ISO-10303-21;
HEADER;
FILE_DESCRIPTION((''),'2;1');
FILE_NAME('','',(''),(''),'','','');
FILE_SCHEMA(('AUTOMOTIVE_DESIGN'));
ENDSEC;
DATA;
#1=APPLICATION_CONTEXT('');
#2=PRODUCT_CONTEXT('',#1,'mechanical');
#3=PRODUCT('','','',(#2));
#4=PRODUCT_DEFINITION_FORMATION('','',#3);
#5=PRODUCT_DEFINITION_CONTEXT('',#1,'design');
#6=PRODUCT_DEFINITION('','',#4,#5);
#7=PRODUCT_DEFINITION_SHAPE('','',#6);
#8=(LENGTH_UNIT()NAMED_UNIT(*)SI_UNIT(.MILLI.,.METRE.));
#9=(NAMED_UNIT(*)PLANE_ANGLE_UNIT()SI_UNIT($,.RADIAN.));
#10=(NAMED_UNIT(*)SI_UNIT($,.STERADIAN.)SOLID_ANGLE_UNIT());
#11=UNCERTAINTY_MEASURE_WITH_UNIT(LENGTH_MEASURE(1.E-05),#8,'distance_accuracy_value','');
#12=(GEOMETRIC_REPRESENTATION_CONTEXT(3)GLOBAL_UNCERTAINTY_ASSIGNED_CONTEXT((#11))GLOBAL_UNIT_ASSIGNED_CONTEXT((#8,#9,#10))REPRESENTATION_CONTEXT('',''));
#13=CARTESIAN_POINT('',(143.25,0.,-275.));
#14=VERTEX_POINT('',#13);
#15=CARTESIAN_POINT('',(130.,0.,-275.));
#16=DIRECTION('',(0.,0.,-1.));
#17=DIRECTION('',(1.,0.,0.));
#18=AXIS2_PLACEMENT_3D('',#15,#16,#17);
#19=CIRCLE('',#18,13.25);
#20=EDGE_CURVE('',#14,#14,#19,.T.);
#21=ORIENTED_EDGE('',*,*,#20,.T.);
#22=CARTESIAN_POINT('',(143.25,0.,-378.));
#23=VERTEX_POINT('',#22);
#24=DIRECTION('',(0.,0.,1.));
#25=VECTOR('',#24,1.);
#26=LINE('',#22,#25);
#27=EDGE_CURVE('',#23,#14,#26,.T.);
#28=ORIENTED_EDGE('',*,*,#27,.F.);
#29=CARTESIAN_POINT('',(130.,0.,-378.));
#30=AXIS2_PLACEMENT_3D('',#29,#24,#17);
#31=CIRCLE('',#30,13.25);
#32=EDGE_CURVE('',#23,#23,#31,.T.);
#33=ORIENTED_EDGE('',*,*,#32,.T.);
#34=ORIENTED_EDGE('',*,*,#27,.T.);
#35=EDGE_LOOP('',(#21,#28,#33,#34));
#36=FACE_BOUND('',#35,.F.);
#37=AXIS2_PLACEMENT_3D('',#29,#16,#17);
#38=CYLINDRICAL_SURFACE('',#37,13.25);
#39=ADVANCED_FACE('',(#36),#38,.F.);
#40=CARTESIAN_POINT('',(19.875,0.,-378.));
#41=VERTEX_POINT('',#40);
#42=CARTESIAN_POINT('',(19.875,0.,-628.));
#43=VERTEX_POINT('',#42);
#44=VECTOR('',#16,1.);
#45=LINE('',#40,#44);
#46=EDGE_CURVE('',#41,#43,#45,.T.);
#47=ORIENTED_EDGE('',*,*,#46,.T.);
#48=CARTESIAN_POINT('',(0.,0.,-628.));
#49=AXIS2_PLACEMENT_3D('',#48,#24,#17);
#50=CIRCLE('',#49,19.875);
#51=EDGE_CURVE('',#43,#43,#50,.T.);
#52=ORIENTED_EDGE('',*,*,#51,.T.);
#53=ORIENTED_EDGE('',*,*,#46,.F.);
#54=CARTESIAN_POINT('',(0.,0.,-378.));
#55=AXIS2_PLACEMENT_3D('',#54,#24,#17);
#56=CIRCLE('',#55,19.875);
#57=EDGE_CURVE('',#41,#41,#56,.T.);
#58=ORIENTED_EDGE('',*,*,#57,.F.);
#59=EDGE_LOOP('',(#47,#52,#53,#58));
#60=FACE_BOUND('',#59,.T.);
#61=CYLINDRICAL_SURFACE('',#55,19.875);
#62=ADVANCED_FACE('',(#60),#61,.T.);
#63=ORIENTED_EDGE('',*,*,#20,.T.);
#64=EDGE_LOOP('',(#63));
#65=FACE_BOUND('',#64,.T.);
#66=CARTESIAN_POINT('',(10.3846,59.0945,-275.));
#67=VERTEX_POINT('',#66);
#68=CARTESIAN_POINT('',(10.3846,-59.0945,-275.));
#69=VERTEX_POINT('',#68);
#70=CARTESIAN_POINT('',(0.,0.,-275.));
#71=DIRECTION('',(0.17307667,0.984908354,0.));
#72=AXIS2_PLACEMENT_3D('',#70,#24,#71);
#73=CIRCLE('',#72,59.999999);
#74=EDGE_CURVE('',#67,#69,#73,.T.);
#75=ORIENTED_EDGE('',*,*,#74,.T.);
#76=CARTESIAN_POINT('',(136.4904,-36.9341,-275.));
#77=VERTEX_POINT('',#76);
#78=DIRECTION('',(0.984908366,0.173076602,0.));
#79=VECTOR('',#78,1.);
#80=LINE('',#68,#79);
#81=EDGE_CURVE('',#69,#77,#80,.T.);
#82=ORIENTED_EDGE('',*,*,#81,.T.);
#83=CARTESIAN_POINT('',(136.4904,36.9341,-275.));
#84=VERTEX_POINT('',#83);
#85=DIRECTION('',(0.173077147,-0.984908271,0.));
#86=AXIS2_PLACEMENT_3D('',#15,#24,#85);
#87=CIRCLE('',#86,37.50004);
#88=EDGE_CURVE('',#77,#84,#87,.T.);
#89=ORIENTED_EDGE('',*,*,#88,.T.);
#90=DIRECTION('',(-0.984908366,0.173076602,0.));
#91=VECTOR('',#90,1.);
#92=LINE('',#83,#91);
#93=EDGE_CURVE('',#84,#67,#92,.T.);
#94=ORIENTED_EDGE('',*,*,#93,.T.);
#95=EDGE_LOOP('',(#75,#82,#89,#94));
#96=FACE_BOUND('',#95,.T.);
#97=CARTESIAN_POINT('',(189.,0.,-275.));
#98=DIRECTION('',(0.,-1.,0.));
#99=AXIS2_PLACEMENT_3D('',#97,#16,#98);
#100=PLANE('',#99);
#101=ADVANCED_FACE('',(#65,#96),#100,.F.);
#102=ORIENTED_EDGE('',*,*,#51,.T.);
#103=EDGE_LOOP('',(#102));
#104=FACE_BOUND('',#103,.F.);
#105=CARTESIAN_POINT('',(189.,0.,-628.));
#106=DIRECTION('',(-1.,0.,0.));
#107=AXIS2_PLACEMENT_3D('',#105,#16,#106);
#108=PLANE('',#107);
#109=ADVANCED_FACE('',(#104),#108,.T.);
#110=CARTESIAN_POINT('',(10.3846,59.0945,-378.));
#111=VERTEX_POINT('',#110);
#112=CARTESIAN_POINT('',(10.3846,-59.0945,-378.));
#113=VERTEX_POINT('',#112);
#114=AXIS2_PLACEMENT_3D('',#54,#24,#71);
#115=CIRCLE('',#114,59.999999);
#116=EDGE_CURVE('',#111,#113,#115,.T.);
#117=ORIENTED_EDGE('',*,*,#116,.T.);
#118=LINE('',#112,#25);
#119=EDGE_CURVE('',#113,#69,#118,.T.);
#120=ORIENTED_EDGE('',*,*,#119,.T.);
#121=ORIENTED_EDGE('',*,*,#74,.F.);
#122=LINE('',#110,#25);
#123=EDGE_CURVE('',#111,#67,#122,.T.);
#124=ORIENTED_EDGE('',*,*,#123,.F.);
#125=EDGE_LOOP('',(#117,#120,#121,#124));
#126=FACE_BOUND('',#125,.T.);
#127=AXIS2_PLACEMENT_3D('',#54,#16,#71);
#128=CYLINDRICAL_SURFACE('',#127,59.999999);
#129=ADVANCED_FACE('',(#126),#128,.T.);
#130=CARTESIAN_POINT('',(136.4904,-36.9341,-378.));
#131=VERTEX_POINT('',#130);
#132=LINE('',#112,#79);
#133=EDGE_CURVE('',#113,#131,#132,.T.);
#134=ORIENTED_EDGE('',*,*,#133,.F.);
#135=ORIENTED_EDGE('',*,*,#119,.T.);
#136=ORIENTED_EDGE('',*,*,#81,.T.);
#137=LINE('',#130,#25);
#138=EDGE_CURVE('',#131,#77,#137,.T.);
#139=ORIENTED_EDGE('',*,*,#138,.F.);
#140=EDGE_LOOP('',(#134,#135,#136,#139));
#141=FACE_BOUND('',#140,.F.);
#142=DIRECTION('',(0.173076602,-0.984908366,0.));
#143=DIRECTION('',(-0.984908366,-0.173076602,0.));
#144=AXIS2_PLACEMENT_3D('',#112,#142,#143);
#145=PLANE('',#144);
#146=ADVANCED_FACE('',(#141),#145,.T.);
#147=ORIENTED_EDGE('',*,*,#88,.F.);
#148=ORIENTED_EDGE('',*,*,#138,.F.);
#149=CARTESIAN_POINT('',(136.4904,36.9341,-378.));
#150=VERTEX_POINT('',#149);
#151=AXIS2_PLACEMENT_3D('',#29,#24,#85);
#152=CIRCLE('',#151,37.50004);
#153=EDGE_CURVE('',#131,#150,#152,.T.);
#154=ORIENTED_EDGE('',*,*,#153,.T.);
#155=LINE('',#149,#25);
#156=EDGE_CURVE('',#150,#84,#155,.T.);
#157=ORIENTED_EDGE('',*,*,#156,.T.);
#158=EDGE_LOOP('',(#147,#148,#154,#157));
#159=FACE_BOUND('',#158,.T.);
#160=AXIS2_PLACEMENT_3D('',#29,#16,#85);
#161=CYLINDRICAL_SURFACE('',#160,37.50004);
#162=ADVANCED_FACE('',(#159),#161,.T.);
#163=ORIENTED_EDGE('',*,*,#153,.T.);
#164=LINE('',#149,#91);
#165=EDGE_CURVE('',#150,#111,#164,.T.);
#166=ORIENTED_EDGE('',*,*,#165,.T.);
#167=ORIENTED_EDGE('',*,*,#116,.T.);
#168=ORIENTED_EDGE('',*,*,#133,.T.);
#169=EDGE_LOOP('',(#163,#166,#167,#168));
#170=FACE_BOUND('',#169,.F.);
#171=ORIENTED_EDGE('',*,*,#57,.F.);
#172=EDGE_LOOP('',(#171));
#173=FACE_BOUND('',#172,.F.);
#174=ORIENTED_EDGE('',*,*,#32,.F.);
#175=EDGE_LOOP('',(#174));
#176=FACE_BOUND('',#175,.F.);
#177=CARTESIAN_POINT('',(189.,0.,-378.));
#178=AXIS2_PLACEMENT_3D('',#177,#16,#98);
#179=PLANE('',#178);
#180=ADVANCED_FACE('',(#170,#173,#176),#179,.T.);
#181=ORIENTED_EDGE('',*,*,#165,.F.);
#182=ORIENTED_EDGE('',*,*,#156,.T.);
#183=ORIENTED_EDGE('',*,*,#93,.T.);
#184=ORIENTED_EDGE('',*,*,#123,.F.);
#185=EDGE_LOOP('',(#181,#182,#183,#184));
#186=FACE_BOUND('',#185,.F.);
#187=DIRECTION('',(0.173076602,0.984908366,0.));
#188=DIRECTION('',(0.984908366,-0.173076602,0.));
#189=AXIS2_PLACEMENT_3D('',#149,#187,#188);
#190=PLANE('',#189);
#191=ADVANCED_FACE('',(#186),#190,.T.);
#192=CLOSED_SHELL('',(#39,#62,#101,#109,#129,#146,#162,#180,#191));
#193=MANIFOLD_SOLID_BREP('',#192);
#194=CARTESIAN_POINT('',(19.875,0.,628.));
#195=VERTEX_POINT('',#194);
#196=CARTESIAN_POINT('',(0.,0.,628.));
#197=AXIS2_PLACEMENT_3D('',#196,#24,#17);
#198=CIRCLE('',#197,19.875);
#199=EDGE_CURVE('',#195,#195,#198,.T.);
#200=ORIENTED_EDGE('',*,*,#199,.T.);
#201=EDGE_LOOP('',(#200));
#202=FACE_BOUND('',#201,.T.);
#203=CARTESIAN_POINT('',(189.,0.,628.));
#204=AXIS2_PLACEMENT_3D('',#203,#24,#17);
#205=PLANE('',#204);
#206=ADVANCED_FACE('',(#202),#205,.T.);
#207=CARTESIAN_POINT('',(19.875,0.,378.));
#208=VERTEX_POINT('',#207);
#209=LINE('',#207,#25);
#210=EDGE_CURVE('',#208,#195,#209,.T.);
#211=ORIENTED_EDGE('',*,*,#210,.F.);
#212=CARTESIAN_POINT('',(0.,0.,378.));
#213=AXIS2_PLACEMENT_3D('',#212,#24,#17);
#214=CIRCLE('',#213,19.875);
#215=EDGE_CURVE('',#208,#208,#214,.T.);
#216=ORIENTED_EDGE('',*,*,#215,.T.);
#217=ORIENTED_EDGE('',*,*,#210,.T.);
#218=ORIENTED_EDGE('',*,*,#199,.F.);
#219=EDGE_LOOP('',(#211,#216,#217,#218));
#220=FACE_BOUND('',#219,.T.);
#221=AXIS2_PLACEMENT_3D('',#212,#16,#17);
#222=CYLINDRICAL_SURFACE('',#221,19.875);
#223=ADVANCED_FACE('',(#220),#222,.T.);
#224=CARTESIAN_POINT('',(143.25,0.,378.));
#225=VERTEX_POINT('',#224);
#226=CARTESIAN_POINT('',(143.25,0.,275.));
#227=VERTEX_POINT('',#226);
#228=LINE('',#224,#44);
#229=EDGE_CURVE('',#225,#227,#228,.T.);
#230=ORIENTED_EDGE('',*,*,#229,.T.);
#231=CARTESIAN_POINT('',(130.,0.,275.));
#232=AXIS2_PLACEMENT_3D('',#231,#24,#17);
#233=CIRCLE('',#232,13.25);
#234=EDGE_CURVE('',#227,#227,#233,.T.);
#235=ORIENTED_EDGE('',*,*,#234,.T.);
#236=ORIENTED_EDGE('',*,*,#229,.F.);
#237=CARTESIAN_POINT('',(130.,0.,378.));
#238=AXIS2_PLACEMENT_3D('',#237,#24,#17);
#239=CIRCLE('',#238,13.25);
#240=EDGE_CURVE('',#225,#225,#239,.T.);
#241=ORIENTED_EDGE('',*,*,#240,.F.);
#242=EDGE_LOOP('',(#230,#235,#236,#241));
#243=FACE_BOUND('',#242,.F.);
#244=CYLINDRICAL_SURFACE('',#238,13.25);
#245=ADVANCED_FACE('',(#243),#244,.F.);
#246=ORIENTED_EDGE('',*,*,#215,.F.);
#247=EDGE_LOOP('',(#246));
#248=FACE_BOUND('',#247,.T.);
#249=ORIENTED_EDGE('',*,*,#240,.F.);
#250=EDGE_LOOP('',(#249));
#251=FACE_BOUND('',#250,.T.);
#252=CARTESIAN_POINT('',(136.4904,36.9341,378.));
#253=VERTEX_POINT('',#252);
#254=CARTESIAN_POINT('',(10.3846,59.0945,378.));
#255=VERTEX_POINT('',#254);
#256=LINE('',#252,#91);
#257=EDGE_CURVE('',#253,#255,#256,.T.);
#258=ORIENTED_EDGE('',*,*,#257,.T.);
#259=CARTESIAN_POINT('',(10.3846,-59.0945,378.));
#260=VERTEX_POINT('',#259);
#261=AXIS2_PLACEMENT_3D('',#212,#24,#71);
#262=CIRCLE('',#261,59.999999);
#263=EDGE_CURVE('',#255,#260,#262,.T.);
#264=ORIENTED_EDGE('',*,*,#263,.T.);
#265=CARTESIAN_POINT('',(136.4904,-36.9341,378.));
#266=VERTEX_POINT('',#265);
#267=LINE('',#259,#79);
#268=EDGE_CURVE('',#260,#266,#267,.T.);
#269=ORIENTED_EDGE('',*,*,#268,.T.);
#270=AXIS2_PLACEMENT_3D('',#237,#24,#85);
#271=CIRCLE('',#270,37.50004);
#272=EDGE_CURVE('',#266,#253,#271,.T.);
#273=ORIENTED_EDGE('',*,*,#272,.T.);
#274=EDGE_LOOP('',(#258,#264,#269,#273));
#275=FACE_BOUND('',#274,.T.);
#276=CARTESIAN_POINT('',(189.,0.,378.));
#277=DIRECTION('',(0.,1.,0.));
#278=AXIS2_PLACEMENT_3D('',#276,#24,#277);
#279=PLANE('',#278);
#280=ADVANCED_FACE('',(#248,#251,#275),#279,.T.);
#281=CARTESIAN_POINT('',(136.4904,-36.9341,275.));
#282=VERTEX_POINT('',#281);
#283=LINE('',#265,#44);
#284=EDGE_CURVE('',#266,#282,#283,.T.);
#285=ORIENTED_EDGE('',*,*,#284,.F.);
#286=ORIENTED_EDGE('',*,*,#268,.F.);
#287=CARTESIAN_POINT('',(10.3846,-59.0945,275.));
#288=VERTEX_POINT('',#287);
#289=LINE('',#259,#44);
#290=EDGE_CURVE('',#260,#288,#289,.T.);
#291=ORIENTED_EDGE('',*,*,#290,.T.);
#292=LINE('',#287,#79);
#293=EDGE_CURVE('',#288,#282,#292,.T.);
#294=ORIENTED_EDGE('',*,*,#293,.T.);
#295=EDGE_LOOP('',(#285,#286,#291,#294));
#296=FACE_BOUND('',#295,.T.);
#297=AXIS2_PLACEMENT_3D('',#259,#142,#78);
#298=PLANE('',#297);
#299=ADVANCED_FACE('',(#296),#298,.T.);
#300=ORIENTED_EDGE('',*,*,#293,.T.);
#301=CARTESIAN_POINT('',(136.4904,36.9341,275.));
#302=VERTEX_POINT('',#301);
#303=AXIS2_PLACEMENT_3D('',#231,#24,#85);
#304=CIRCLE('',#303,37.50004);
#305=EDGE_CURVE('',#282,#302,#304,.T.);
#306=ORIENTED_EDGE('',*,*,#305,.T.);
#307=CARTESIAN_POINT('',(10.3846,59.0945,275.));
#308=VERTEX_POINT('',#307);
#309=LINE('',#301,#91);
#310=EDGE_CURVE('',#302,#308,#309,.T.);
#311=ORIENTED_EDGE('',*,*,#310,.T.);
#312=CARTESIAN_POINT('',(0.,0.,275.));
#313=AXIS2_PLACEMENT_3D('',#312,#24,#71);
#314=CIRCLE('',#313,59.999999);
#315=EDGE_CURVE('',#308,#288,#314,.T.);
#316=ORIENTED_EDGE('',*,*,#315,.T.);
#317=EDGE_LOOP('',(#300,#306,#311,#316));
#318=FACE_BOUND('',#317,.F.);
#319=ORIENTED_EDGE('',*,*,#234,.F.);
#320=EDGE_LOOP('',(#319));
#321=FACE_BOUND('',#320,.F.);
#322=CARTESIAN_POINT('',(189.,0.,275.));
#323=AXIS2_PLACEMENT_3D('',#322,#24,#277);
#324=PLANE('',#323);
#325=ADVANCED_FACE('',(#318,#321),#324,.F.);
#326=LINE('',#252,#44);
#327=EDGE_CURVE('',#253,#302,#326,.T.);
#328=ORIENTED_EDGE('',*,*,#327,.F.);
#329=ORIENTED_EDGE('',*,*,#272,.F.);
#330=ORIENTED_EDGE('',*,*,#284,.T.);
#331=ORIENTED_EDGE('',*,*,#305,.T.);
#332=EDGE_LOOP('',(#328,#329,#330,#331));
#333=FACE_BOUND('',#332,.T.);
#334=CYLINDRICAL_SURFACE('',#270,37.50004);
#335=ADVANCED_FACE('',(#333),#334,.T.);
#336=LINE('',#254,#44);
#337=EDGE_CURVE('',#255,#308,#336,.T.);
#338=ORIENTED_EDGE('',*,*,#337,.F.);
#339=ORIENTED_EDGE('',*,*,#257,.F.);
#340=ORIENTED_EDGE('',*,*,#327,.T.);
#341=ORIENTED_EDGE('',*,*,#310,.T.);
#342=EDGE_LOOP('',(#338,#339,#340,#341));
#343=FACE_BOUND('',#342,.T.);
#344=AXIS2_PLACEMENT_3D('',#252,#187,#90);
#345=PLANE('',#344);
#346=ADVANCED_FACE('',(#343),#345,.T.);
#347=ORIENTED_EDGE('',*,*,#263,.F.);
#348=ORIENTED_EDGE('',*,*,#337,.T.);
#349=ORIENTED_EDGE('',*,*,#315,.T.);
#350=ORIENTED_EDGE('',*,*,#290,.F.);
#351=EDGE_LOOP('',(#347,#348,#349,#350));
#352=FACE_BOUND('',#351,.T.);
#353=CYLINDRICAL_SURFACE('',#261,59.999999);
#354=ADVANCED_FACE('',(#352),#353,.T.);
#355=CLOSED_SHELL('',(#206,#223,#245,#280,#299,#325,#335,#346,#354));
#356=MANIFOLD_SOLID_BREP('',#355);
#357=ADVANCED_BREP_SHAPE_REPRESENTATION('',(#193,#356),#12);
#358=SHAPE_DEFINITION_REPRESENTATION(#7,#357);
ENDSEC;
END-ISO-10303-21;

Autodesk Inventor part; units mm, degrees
ref_plane "YZ Plane" through (0, 0, 0) normal (1, 0, 0) x (0, 1, 0)
ref_plane "XZ Plane" through (0, 0, 0) normal (0, 1, 0) x (-1, 0, 0)
ref_plane "工作平面2" through (0, 0, 378) normal (0, 0, 1) x (1, 0, 0)
sketch "草圖1" plane through (189, 0, 378) normal (0, 0, 1) x (0, 1, 0)
  line L0 (0, 189) -> (0, 59) construction
  line L1 (-59.0945, 178.6154) -> (-36.9341, 52.5096)
  line L2 (36.9341, 52.5096) -> (59.0945, 178.6154)
  arc A0 (59.0945, 178.6154) -> (-59.0945, 178.6154) centre (0, 189) ccw
  arc A1 (-36.9341, 52.5096) -> (36.9341, 52.5096) centre (0, 59) ccw
  point P0 (0, 124)
  dimension "d1" = 130
  dimension "d2" = 60
  dimension "d3" = 37.5
extrude "擠出1" add sketch "草圖1" against normal blind 103
sketch "草圖2" plane through (189, 0, 378) normal (0, 0, 1) x (1, 0, 0)
  circle A0 centre (-189, 0) radius 19.875
  dimension "d6" = 39.75
extrude "擠出2" add sketch "草圖2" along normal blind 250
sketch "草圖3" plane through (189, 0, 378) normal (0, 0, 1) x (1, 0, 0)
  arc A0 (-52.5096, -36.9341) -> (-52.5096, 36.9341) centre (-59, 0) ccw projected
  circle A1 centre (-59, 0) radius 13.25
  point P0 (-189, 0)
  dimension "d9" = 26.5
extrude "擠出3" cut sketch "草圖3" against normal through all
sketch "草圖4" plane through (136.4904, 36.9341, 275) normal (0.1730769, 0.9849083, 0) x (0, 0, 1)
  line L0 (103, 0) -> (0, 0) projected
  point P0 (-275, -128.0381)
  point P1 (51.5, 0)
hole "孔1" [suppressed]
sketch "草圖5" plane through (10.3846, -59.0945, 275) normal (0.1730769, -0.9849083, 0) x (0.9849083, 0.1730769, 0)
  line L0 (128.0381, 103) -> (128.0381, 0) projected
  point P0 (0, -275)
  point P1 (128.0381, 51.5)
hole "孔2" [suppressed]
mirror "鏡射2" about plane through (0, 0, 0) normal (0, 0, 1) of "擠出1", "擠出2", "擠出3"
equation "\"d1\" = R2"
equation "\"R2\" = T1A_R2"
equation "\"Width\" = T1A_R2_Width"
equation "\"d19\" = 0.5 * Width"
equation "\"T1A_R2_Width\" = 756"
equation "\"T1A_R1\" = 585.5331"
equation "\"T1A_R3\" = 252.3048"
equation "\"T1A_R4\" = 320.6953"
equation "\"T1A_R5\" = 419.3047"
equation "\"T1A_R7\" = -221.7475"
equation "\"T1A_R8\" = 369.2781"
equation "\"T1A_R1_Width\" = 756"
equation "\"T1A_R3_Width\" = 344"
equation "\"T1A_R4_Width\" = 756"
equation "\"T1A_Joint_Width\" = 756"
equation "\"T1A_R2\" = 130"
properties part number "Type 1A R2延伸曲柄:1" material "密度7850的鋼"
